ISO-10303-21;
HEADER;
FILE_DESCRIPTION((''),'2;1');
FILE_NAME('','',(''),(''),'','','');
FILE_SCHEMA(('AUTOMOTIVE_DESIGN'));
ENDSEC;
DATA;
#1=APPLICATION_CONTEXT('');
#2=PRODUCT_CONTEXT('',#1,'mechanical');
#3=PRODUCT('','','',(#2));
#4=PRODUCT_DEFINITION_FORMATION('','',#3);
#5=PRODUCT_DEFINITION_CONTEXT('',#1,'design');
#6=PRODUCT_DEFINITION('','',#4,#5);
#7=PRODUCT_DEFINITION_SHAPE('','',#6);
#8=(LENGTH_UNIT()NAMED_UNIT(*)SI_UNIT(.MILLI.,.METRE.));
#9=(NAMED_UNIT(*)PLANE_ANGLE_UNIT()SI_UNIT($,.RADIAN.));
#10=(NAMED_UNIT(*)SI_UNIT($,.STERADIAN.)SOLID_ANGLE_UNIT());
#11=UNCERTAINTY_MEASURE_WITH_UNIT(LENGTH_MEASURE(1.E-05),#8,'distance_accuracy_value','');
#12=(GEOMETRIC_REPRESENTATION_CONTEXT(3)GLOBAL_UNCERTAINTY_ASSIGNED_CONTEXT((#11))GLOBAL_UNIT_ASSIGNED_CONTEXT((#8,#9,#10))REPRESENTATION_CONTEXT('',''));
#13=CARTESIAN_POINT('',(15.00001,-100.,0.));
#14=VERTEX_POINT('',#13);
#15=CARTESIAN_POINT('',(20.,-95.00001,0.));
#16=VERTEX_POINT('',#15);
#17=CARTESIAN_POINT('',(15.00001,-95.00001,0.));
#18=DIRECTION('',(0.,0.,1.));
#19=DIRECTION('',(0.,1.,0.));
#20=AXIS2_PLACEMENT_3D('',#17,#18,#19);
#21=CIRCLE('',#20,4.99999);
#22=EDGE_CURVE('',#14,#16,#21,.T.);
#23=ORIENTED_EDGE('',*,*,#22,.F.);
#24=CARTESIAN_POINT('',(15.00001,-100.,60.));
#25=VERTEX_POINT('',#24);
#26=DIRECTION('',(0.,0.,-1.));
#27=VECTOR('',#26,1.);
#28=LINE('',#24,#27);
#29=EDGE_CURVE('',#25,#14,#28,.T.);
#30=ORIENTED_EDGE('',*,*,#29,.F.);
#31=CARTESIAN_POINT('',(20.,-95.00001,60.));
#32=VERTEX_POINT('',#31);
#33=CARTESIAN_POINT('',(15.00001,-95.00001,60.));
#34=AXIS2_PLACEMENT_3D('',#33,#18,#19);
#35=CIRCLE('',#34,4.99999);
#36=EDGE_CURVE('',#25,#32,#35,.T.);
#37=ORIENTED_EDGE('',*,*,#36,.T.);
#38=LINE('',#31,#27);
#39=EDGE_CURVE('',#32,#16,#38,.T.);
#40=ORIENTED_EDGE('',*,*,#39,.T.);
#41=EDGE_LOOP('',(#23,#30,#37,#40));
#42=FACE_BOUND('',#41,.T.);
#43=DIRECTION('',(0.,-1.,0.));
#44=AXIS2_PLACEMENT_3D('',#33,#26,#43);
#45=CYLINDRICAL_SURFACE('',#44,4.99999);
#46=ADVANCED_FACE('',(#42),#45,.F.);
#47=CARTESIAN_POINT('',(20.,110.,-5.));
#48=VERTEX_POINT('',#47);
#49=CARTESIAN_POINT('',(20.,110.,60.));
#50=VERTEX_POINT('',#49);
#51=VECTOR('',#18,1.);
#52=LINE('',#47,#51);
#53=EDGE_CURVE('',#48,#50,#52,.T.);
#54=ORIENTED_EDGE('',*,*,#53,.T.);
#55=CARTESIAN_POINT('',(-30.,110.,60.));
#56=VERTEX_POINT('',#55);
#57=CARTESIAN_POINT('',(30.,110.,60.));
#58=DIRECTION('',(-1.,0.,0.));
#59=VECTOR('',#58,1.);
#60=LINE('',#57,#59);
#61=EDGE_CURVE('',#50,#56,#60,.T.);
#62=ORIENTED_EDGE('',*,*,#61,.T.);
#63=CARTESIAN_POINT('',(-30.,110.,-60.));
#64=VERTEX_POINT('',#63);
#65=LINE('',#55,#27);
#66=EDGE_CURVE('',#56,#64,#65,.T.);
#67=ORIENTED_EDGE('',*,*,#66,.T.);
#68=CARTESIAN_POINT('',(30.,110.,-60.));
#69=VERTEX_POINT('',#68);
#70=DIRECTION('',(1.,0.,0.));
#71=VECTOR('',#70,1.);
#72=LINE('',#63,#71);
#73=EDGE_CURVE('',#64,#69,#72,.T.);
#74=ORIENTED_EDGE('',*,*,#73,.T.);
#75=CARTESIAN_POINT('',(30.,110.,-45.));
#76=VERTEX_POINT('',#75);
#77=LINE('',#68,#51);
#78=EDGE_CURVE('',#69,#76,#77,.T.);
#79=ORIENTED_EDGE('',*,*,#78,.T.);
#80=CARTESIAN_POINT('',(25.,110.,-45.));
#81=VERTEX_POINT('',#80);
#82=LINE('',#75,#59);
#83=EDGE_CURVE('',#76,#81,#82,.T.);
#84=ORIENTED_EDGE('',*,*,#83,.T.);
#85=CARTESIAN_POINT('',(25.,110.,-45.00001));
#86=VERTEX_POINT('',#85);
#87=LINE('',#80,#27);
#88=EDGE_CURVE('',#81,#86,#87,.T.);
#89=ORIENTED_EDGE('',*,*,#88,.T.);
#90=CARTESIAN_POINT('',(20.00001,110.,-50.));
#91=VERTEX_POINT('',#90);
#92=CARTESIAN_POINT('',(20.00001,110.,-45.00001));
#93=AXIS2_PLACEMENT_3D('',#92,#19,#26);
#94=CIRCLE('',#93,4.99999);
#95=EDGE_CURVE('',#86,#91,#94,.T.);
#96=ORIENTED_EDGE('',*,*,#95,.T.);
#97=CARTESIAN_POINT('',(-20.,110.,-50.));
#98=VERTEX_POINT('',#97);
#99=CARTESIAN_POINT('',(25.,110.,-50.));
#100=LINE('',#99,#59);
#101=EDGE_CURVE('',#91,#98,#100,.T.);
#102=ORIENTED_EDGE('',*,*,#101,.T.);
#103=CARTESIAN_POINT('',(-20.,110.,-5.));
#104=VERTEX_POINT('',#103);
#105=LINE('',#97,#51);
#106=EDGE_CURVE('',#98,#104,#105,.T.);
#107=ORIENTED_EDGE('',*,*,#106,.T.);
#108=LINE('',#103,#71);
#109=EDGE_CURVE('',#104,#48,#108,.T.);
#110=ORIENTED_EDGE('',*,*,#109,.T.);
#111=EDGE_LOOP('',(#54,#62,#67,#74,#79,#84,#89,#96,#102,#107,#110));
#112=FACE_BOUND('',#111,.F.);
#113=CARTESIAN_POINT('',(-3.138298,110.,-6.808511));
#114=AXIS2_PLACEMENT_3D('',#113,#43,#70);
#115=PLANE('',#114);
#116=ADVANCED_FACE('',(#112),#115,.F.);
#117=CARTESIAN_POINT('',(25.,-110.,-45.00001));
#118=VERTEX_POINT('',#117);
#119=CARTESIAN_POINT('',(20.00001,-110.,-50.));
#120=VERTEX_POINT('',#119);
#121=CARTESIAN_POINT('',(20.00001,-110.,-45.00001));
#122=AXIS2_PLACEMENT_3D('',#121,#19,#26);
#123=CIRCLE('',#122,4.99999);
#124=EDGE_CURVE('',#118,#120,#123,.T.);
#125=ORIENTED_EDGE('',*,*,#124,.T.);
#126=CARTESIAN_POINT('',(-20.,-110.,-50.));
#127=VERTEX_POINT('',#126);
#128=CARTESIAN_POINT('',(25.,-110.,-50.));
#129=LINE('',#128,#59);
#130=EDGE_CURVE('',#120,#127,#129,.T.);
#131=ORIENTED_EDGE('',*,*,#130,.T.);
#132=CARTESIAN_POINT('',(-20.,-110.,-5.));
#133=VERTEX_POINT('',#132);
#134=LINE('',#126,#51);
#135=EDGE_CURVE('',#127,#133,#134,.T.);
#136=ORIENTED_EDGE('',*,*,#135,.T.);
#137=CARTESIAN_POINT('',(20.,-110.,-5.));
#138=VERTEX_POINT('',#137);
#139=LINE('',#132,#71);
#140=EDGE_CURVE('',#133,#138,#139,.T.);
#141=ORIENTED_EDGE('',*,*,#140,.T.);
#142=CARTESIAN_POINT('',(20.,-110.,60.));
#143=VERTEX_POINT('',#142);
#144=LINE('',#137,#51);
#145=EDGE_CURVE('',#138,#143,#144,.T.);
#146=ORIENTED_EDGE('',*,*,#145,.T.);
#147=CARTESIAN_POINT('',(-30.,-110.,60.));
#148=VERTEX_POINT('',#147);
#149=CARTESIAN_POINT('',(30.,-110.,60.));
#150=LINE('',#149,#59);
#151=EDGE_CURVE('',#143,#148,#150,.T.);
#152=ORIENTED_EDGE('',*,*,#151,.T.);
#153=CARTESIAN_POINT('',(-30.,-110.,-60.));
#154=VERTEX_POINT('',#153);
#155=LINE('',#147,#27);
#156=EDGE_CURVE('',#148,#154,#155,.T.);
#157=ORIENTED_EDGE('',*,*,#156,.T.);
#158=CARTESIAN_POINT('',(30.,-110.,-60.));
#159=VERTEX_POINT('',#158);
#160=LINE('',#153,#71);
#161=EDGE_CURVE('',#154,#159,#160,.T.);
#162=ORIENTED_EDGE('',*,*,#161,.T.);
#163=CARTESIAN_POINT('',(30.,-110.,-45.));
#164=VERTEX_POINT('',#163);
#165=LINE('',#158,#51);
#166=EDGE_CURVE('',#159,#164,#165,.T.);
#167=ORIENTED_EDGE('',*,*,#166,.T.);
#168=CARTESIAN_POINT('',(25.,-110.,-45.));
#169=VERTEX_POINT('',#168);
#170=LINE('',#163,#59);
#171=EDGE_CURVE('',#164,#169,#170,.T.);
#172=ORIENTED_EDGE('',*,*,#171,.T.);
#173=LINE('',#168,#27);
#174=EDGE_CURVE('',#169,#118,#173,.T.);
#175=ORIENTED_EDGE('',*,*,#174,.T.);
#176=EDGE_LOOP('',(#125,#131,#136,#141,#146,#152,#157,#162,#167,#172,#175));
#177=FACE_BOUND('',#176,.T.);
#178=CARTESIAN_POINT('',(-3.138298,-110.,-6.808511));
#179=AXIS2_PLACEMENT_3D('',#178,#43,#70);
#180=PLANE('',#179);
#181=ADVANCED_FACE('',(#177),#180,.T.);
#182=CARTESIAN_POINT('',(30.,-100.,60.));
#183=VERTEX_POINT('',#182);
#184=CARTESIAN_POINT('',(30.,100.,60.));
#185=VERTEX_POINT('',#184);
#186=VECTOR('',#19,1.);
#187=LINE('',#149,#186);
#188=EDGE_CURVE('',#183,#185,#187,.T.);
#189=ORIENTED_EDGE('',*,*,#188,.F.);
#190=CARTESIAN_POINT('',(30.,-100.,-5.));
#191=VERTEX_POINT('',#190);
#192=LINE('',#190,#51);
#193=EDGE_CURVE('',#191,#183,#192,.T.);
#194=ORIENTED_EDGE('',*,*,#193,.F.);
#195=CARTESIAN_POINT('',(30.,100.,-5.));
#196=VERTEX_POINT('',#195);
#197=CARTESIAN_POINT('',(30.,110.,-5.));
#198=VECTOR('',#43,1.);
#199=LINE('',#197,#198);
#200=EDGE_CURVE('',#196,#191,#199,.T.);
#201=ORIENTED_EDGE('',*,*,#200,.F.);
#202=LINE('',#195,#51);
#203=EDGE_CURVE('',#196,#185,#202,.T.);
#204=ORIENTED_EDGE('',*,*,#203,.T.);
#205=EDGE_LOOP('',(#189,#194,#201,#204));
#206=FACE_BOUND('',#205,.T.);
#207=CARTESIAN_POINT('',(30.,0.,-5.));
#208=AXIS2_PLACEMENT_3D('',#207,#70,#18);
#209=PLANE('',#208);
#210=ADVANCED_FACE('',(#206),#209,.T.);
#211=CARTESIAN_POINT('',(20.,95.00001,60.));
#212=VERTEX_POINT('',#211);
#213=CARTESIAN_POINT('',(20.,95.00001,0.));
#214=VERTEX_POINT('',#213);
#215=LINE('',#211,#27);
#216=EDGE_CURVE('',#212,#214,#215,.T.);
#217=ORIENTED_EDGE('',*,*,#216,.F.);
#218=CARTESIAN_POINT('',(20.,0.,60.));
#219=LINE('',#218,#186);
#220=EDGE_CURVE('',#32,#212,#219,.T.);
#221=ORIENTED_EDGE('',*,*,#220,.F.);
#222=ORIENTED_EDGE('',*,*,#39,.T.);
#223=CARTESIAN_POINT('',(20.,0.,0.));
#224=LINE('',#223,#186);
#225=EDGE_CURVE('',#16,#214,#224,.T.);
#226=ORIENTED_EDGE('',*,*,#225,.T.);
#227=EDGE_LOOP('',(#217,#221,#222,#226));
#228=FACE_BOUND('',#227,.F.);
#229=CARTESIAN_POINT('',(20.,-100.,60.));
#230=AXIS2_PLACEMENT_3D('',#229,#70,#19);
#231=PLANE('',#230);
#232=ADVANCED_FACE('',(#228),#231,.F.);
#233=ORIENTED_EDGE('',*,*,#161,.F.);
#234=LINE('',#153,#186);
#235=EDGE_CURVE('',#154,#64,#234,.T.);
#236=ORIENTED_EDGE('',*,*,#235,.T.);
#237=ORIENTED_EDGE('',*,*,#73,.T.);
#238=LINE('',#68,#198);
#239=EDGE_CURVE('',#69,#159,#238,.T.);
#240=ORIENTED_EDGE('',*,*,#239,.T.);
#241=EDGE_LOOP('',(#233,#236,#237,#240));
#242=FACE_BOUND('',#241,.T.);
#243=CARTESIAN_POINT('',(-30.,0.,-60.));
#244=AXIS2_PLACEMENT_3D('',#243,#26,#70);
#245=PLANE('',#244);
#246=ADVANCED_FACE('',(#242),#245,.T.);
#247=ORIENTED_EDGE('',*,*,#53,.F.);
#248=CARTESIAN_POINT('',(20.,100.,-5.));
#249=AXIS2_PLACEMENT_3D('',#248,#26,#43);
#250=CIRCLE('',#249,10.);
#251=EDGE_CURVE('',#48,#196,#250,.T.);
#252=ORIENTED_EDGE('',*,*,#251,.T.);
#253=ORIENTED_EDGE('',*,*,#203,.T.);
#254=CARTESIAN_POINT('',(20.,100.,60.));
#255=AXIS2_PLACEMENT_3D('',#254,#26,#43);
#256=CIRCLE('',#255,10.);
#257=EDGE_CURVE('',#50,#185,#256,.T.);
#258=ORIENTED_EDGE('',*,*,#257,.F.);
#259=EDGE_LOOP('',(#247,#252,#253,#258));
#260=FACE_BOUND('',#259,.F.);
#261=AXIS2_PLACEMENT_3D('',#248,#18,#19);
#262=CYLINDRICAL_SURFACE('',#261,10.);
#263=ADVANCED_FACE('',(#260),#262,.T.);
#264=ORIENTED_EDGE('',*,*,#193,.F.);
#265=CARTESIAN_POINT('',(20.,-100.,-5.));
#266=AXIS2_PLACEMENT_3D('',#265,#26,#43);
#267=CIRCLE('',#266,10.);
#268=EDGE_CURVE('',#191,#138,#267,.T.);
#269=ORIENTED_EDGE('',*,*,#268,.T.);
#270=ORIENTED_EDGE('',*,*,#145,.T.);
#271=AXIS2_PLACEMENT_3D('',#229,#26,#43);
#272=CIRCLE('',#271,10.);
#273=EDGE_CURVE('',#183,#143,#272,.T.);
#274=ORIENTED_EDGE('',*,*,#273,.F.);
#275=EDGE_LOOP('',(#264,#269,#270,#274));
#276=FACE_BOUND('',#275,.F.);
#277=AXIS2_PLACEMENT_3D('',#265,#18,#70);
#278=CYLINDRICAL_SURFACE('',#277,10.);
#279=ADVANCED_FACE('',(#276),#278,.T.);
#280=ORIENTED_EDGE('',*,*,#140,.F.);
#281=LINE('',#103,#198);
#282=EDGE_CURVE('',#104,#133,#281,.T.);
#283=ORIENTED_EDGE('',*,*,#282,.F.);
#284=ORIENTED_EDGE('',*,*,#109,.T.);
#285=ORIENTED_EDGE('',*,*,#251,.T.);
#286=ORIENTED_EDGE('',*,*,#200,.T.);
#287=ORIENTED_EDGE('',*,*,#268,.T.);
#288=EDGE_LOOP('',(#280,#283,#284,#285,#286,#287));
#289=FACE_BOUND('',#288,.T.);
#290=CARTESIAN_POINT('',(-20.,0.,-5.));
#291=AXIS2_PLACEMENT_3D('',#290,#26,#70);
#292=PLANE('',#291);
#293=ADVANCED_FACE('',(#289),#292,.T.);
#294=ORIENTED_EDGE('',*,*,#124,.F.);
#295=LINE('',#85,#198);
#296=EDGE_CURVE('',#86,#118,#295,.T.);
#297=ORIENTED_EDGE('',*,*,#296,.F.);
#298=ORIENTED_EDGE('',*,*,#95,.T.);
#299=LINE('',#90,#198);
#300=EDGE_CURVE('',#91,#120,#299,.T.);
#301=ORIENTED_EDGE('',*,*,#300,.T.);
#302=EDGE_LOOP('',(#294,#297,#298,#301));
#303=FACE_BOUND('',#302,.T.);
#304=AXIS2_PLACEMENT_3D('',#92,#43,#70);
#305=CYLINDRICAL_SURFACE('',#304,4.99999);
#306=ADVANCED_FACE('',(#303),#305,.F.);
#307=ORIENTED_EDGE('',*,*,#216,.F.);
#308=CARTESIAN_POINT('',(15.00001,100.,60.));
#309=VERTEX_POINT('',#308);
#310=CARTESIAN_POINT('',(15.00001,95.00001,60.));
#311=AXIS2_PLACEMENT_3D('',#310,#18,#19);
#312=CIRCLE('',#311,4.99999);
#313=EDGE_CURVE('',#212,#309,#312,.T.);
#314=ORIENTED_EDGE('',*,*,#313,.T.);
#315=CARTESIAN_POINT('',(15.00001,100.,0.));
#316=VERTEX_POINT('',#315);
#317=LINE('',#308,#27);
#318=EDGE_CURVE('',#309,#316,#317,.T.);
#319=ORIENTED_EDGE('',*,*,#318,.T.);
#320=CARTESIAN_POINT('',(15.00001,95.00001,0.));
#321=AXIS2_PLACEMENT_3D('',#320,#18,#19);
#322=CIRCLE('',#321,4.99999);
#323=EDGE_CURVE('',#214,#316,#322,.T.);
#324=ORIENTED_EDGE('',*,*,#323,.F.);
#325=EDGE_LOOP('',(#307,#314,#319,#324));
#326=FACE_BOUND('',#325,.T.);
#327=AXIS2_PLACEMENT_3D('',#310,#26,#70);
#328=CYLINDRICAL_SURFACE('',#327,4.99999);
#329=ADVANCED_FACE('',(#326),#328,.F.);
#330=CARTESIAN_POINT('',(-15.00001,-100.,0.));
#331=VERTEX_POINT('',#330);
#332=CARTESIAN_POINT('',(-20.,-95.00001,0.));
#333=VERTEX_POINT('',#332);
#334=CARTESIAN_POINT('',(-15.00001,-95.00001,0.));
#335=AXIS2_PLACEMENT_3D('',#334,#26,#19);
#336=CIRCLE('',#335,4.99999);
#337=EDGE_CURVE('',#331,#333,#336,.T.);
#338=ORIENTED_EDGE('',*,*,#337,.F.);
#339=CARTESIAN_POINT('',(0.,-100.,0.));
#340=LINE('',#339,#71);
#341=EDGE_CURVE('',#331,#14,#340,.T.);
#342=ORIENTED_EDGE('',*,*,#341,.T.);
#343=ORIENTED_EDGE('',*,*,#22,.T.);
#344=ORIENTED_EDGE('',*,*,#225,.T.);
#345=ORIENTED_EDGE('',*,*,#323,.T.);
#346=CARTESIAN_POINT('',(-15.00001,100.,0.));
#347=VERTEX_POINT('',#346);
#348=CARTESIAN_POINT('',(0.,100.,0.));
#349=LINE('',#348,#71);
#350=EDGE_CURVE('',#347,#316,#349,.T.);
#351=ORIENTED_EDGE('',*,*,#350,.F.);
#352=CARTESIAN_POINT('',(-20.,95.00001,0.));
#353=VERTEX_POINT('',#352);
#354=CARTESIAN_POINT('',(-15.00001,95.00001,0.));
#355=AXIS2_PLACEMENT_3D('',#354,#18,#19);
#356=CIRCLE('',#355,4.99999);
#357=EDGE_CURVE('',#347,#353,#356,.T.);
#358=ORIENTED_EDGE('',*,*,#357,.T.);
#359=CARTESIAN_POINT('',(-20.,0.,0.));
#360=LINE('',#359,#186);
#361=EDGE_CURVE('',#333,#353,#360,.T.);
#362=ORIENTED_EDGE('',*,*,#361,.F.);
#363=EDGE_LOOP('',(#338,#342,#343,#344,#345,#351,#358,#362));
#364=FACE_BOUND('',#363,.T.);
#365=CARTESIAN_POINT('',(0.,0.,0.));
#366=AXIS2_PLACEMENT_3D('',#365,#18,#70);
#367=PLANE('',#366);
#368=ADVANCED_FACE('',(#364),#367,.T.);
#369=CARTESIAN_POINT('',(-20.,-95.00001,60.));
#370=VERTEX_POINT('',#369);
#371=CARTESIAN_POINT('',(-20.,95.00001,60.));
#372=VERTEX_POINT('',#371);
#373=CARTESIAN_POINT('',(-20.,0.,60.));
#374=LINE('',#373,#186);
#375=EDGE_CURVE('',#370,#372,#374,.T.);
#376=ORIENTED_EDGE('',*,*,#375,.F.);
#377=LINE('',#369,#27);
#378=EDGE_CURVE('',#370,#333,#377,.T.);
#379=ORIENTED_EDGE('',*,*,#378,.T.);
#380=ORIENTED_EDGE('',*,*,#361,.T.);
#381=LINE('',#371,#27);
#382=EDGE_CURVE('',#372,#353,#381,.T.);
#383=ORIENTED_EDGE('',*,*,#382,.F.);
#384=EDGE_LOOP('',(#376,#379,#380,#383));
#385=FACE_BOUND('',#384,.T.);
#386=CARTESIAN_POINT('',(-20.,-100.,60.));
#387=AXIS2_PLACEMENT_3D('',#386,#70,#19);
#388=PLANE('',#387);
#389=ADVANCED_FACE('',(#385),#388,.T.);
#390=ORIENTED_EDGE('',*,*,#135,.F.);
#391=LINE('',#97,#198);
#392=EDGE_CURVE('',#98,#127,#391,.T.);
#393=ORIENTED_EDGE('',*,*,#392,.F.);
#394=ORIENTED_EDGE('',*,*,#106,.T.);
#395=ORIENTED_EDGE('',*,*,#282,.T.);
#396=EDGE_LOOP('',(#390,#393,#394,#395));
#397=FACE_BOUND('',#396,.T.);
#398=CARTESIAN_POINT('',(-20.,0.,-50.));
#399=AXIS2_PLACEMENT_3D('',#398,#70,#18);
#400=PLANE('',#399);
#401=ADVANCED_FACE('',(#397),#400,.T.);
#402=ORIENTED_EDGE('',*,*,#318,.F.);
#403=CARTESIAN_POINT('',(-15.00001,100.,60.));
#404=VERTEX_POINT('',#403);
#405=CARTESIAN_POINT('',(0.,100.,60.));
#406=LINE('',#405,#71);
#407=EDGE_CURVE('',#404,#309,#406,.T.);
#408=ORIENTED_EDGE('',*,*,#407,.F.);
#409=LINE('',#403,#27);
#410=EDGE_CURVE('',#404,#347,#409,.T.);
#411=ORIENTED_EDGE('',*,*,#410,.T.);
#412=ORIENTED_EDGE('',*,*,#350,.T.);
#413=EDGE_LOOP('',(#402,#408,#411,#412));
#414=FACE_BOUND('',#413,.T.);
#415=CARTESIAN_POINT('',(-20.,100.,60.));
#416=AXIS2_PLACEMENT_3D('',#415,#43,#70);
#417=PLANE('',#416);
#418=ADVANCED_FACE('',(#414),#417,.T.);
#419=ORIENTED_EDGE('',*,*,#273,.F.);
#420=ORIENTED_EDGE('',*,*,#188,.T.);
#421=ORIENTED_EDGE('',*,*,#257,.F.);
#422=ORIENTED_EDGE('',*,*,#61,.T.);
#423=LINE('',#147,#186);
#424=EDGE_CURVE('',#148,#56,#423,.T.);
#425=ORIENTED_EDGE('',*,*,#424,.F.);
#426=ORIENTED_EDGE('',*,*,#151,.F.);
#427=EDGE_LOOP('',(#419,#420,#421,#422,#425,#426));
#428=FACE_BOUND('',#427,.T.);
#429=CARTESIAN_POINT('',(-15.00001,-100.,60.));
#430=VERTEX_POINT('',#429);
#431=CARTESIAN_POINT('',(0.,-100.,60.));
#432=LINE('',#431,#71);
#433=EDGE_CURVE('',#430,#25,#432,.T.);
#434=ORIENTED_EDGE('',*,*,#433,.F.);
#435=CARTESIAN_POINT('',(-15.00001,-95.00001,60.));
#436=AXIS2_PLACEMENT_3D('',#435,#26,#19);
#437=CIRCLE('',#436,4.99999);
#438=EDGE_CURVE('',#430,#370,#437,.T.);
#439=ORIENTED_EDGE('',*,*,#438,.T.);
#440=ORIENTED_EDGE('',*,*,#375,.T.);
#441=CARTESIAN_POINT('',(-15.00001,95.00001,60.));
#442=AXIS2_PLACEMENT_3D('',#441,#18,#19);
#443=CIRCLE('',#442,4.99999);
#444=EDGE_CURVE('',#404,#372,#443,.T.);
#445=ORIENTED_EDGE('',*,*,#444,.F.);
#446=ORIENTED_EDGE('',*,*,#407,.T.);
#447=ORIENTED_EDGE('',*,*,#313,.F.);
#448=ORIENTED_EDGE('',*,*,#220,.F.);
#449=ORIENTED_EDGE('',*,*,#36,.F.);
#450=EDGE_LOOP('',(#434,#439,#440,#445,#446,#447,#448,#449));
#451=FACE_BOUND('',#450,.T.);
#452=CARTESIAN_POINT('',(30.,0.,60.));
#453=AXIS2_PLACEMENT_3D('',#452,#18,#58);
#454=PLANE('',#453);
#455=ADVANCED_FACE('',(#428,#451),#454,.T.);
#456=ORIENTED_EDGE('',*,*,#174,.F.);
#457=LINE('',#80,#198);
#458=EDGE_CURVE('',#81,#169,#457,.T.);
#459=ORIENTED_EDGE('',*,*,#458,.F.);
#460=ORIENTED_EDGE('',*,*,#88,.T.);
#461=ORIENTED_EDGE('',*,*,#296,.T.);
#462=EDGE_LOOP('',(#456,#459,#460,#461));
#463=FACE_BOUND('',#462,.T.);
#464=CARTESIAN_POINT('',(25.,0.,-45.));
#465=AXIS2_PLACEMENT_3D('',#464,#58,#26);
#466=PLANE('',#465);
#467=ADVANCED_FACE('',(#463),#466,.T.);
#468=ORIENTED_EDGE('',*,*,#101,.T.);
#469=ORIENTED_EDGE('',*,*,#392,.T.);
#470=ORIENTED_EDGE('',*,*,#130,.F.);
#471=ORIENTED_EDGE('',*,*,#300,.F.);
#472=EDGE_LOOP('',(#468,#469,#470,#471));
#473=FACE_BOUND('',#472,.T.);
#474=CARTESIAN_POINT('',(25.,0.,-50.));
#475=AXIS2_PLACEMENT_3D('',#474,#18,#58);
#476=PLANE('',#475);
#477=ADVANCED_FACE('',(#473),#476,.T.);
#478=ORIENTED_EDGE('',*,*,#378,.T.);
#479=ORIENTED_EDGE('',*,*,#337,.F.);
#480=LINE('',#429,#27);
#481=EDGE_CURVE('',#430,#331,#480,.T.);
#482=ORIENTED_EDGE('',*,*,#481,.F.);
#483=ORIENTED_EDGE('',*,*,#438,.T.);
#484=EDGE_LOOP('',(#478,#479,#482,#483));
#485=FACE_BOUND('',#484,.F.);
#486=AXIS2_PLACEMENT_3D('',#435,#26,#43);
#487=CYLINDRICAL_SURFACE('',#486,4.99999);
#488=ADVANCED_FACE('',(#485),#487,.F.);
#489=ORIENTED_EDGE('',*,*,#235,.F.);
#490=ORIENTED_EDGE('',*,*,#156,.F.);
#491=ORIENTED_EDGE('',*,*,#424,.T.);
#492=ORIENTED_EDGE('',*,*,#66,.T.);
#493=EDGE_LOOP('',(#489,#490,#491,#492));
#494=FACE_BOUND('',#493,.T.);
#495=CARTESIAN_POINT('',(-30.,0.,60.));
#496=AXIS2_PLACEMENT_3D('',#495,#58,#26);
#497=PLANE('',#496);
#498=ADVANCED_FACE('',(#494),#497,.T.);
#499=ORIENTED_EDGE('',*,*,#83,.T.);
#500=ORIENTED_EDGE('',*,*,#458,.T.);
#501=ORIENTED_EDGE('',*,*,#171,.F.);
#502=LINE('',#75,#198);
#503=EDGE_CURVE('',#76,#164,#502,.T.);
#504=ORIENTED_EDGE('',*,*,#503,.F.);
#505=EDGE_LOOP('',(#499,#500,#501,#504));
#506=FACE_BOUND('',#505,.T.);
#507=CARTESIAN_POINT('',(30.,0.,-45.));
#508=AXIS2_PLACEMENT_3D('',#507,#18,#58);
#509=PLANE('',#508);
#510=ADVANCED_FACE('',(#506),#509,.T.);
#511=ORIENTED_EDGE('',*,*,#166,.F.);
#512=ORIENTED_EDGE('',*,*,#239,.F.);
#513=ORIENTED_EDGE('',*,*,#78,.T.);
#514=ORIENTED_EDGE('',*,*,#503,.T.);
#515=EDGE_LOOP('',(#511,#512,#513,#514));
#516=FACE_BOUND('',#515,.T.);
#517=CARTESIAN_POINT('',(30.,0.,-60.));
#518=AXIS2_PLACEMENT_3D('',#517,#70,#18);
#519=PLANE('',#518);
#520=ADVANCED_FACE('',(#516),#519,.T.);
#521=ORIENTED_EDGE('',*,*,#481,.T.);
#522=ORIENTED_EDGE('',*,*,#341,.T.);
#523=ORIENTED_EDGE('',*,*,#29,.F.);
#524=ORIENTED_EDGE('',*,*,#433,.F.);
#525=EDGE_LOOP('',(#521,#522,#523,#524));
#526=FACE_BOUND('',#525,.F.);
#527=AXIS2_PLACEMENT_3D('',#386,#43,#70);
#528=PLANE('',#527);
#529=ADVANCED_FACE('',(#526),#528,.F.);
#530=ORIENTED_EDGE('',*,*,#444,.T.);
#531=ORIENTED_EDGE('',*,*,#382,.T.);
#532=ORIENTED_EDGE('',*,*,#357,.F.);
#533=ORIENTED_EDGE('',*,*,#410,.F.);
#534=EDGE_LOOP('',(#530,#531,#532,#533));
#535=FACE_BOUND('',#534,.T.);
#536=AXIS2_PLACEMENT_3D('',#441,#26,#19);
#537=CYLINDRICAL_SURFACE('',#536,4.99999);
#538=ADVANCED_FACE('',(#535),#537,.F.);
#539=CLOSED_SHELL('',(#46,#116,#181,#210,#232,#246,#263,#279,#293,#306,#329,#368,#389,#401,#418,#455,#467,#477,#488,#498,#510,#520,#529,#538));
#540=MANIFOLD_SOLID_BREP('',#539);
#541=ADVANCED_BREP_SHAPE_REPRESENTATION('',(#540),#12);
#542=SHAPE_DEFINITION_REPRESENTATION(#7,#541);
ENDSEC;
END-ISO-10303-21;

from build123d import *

# Parameters (mm, degrees)
F1_DEPTH = 110
F2_W     = 40
F2_H     = 200
F3_DEPTH = 60
F4_R     = 4.99999
F5_R     = 10


# Not quite as in the source:
# - a fillet or chamfer is up to 0.001 mm smaller than in the source, because OpenCascade refuses the exact size


with BuildPart() as f1:
    # F0 (on Front) → F1 (new body, symmetric)
    with BuildSketch(Plane.XZ):
        Polygon((-30, -60), (30, -60), (30, -50), (30, -45), (25, -45), (25, -50), (-20, -50), (-20, -5), (30, -5), (30, 60), (-30, 60), align=None)
    extrude(amount=F1_DEPTH, both=True)

    # F2 (on face) → F3 (cut)
    with BuildSketch(Plane.XY.offset(60)):
        Rectangle(F2_W, F2_H)
    extrude(amount=-F3_DEPTH, mode=Mode.SUBTRACT)

    # F4 (radius 5 in the source; OpenCascade refuses exactly that, so slightly less here)
    f4_edges = [f1.edges().sort_by_distance(p)[0] for p in [
        (-20, 100, 30),
        (20, 100, 30),
        (-20, -100, 30),
        (20, -100, 30),
        (25, 0, -50),
    ]]
    fillet(f4_edges, radius=F4_R)

    # F5
    f5_edges = [f1.edges().sort_by_distance(p)[0] for p in [
        (30, -110, 27.5),
        (30, 110, 27.5),
    ]]
    fillet(f5_edges, radius=F5_R)


solid = f1.part
